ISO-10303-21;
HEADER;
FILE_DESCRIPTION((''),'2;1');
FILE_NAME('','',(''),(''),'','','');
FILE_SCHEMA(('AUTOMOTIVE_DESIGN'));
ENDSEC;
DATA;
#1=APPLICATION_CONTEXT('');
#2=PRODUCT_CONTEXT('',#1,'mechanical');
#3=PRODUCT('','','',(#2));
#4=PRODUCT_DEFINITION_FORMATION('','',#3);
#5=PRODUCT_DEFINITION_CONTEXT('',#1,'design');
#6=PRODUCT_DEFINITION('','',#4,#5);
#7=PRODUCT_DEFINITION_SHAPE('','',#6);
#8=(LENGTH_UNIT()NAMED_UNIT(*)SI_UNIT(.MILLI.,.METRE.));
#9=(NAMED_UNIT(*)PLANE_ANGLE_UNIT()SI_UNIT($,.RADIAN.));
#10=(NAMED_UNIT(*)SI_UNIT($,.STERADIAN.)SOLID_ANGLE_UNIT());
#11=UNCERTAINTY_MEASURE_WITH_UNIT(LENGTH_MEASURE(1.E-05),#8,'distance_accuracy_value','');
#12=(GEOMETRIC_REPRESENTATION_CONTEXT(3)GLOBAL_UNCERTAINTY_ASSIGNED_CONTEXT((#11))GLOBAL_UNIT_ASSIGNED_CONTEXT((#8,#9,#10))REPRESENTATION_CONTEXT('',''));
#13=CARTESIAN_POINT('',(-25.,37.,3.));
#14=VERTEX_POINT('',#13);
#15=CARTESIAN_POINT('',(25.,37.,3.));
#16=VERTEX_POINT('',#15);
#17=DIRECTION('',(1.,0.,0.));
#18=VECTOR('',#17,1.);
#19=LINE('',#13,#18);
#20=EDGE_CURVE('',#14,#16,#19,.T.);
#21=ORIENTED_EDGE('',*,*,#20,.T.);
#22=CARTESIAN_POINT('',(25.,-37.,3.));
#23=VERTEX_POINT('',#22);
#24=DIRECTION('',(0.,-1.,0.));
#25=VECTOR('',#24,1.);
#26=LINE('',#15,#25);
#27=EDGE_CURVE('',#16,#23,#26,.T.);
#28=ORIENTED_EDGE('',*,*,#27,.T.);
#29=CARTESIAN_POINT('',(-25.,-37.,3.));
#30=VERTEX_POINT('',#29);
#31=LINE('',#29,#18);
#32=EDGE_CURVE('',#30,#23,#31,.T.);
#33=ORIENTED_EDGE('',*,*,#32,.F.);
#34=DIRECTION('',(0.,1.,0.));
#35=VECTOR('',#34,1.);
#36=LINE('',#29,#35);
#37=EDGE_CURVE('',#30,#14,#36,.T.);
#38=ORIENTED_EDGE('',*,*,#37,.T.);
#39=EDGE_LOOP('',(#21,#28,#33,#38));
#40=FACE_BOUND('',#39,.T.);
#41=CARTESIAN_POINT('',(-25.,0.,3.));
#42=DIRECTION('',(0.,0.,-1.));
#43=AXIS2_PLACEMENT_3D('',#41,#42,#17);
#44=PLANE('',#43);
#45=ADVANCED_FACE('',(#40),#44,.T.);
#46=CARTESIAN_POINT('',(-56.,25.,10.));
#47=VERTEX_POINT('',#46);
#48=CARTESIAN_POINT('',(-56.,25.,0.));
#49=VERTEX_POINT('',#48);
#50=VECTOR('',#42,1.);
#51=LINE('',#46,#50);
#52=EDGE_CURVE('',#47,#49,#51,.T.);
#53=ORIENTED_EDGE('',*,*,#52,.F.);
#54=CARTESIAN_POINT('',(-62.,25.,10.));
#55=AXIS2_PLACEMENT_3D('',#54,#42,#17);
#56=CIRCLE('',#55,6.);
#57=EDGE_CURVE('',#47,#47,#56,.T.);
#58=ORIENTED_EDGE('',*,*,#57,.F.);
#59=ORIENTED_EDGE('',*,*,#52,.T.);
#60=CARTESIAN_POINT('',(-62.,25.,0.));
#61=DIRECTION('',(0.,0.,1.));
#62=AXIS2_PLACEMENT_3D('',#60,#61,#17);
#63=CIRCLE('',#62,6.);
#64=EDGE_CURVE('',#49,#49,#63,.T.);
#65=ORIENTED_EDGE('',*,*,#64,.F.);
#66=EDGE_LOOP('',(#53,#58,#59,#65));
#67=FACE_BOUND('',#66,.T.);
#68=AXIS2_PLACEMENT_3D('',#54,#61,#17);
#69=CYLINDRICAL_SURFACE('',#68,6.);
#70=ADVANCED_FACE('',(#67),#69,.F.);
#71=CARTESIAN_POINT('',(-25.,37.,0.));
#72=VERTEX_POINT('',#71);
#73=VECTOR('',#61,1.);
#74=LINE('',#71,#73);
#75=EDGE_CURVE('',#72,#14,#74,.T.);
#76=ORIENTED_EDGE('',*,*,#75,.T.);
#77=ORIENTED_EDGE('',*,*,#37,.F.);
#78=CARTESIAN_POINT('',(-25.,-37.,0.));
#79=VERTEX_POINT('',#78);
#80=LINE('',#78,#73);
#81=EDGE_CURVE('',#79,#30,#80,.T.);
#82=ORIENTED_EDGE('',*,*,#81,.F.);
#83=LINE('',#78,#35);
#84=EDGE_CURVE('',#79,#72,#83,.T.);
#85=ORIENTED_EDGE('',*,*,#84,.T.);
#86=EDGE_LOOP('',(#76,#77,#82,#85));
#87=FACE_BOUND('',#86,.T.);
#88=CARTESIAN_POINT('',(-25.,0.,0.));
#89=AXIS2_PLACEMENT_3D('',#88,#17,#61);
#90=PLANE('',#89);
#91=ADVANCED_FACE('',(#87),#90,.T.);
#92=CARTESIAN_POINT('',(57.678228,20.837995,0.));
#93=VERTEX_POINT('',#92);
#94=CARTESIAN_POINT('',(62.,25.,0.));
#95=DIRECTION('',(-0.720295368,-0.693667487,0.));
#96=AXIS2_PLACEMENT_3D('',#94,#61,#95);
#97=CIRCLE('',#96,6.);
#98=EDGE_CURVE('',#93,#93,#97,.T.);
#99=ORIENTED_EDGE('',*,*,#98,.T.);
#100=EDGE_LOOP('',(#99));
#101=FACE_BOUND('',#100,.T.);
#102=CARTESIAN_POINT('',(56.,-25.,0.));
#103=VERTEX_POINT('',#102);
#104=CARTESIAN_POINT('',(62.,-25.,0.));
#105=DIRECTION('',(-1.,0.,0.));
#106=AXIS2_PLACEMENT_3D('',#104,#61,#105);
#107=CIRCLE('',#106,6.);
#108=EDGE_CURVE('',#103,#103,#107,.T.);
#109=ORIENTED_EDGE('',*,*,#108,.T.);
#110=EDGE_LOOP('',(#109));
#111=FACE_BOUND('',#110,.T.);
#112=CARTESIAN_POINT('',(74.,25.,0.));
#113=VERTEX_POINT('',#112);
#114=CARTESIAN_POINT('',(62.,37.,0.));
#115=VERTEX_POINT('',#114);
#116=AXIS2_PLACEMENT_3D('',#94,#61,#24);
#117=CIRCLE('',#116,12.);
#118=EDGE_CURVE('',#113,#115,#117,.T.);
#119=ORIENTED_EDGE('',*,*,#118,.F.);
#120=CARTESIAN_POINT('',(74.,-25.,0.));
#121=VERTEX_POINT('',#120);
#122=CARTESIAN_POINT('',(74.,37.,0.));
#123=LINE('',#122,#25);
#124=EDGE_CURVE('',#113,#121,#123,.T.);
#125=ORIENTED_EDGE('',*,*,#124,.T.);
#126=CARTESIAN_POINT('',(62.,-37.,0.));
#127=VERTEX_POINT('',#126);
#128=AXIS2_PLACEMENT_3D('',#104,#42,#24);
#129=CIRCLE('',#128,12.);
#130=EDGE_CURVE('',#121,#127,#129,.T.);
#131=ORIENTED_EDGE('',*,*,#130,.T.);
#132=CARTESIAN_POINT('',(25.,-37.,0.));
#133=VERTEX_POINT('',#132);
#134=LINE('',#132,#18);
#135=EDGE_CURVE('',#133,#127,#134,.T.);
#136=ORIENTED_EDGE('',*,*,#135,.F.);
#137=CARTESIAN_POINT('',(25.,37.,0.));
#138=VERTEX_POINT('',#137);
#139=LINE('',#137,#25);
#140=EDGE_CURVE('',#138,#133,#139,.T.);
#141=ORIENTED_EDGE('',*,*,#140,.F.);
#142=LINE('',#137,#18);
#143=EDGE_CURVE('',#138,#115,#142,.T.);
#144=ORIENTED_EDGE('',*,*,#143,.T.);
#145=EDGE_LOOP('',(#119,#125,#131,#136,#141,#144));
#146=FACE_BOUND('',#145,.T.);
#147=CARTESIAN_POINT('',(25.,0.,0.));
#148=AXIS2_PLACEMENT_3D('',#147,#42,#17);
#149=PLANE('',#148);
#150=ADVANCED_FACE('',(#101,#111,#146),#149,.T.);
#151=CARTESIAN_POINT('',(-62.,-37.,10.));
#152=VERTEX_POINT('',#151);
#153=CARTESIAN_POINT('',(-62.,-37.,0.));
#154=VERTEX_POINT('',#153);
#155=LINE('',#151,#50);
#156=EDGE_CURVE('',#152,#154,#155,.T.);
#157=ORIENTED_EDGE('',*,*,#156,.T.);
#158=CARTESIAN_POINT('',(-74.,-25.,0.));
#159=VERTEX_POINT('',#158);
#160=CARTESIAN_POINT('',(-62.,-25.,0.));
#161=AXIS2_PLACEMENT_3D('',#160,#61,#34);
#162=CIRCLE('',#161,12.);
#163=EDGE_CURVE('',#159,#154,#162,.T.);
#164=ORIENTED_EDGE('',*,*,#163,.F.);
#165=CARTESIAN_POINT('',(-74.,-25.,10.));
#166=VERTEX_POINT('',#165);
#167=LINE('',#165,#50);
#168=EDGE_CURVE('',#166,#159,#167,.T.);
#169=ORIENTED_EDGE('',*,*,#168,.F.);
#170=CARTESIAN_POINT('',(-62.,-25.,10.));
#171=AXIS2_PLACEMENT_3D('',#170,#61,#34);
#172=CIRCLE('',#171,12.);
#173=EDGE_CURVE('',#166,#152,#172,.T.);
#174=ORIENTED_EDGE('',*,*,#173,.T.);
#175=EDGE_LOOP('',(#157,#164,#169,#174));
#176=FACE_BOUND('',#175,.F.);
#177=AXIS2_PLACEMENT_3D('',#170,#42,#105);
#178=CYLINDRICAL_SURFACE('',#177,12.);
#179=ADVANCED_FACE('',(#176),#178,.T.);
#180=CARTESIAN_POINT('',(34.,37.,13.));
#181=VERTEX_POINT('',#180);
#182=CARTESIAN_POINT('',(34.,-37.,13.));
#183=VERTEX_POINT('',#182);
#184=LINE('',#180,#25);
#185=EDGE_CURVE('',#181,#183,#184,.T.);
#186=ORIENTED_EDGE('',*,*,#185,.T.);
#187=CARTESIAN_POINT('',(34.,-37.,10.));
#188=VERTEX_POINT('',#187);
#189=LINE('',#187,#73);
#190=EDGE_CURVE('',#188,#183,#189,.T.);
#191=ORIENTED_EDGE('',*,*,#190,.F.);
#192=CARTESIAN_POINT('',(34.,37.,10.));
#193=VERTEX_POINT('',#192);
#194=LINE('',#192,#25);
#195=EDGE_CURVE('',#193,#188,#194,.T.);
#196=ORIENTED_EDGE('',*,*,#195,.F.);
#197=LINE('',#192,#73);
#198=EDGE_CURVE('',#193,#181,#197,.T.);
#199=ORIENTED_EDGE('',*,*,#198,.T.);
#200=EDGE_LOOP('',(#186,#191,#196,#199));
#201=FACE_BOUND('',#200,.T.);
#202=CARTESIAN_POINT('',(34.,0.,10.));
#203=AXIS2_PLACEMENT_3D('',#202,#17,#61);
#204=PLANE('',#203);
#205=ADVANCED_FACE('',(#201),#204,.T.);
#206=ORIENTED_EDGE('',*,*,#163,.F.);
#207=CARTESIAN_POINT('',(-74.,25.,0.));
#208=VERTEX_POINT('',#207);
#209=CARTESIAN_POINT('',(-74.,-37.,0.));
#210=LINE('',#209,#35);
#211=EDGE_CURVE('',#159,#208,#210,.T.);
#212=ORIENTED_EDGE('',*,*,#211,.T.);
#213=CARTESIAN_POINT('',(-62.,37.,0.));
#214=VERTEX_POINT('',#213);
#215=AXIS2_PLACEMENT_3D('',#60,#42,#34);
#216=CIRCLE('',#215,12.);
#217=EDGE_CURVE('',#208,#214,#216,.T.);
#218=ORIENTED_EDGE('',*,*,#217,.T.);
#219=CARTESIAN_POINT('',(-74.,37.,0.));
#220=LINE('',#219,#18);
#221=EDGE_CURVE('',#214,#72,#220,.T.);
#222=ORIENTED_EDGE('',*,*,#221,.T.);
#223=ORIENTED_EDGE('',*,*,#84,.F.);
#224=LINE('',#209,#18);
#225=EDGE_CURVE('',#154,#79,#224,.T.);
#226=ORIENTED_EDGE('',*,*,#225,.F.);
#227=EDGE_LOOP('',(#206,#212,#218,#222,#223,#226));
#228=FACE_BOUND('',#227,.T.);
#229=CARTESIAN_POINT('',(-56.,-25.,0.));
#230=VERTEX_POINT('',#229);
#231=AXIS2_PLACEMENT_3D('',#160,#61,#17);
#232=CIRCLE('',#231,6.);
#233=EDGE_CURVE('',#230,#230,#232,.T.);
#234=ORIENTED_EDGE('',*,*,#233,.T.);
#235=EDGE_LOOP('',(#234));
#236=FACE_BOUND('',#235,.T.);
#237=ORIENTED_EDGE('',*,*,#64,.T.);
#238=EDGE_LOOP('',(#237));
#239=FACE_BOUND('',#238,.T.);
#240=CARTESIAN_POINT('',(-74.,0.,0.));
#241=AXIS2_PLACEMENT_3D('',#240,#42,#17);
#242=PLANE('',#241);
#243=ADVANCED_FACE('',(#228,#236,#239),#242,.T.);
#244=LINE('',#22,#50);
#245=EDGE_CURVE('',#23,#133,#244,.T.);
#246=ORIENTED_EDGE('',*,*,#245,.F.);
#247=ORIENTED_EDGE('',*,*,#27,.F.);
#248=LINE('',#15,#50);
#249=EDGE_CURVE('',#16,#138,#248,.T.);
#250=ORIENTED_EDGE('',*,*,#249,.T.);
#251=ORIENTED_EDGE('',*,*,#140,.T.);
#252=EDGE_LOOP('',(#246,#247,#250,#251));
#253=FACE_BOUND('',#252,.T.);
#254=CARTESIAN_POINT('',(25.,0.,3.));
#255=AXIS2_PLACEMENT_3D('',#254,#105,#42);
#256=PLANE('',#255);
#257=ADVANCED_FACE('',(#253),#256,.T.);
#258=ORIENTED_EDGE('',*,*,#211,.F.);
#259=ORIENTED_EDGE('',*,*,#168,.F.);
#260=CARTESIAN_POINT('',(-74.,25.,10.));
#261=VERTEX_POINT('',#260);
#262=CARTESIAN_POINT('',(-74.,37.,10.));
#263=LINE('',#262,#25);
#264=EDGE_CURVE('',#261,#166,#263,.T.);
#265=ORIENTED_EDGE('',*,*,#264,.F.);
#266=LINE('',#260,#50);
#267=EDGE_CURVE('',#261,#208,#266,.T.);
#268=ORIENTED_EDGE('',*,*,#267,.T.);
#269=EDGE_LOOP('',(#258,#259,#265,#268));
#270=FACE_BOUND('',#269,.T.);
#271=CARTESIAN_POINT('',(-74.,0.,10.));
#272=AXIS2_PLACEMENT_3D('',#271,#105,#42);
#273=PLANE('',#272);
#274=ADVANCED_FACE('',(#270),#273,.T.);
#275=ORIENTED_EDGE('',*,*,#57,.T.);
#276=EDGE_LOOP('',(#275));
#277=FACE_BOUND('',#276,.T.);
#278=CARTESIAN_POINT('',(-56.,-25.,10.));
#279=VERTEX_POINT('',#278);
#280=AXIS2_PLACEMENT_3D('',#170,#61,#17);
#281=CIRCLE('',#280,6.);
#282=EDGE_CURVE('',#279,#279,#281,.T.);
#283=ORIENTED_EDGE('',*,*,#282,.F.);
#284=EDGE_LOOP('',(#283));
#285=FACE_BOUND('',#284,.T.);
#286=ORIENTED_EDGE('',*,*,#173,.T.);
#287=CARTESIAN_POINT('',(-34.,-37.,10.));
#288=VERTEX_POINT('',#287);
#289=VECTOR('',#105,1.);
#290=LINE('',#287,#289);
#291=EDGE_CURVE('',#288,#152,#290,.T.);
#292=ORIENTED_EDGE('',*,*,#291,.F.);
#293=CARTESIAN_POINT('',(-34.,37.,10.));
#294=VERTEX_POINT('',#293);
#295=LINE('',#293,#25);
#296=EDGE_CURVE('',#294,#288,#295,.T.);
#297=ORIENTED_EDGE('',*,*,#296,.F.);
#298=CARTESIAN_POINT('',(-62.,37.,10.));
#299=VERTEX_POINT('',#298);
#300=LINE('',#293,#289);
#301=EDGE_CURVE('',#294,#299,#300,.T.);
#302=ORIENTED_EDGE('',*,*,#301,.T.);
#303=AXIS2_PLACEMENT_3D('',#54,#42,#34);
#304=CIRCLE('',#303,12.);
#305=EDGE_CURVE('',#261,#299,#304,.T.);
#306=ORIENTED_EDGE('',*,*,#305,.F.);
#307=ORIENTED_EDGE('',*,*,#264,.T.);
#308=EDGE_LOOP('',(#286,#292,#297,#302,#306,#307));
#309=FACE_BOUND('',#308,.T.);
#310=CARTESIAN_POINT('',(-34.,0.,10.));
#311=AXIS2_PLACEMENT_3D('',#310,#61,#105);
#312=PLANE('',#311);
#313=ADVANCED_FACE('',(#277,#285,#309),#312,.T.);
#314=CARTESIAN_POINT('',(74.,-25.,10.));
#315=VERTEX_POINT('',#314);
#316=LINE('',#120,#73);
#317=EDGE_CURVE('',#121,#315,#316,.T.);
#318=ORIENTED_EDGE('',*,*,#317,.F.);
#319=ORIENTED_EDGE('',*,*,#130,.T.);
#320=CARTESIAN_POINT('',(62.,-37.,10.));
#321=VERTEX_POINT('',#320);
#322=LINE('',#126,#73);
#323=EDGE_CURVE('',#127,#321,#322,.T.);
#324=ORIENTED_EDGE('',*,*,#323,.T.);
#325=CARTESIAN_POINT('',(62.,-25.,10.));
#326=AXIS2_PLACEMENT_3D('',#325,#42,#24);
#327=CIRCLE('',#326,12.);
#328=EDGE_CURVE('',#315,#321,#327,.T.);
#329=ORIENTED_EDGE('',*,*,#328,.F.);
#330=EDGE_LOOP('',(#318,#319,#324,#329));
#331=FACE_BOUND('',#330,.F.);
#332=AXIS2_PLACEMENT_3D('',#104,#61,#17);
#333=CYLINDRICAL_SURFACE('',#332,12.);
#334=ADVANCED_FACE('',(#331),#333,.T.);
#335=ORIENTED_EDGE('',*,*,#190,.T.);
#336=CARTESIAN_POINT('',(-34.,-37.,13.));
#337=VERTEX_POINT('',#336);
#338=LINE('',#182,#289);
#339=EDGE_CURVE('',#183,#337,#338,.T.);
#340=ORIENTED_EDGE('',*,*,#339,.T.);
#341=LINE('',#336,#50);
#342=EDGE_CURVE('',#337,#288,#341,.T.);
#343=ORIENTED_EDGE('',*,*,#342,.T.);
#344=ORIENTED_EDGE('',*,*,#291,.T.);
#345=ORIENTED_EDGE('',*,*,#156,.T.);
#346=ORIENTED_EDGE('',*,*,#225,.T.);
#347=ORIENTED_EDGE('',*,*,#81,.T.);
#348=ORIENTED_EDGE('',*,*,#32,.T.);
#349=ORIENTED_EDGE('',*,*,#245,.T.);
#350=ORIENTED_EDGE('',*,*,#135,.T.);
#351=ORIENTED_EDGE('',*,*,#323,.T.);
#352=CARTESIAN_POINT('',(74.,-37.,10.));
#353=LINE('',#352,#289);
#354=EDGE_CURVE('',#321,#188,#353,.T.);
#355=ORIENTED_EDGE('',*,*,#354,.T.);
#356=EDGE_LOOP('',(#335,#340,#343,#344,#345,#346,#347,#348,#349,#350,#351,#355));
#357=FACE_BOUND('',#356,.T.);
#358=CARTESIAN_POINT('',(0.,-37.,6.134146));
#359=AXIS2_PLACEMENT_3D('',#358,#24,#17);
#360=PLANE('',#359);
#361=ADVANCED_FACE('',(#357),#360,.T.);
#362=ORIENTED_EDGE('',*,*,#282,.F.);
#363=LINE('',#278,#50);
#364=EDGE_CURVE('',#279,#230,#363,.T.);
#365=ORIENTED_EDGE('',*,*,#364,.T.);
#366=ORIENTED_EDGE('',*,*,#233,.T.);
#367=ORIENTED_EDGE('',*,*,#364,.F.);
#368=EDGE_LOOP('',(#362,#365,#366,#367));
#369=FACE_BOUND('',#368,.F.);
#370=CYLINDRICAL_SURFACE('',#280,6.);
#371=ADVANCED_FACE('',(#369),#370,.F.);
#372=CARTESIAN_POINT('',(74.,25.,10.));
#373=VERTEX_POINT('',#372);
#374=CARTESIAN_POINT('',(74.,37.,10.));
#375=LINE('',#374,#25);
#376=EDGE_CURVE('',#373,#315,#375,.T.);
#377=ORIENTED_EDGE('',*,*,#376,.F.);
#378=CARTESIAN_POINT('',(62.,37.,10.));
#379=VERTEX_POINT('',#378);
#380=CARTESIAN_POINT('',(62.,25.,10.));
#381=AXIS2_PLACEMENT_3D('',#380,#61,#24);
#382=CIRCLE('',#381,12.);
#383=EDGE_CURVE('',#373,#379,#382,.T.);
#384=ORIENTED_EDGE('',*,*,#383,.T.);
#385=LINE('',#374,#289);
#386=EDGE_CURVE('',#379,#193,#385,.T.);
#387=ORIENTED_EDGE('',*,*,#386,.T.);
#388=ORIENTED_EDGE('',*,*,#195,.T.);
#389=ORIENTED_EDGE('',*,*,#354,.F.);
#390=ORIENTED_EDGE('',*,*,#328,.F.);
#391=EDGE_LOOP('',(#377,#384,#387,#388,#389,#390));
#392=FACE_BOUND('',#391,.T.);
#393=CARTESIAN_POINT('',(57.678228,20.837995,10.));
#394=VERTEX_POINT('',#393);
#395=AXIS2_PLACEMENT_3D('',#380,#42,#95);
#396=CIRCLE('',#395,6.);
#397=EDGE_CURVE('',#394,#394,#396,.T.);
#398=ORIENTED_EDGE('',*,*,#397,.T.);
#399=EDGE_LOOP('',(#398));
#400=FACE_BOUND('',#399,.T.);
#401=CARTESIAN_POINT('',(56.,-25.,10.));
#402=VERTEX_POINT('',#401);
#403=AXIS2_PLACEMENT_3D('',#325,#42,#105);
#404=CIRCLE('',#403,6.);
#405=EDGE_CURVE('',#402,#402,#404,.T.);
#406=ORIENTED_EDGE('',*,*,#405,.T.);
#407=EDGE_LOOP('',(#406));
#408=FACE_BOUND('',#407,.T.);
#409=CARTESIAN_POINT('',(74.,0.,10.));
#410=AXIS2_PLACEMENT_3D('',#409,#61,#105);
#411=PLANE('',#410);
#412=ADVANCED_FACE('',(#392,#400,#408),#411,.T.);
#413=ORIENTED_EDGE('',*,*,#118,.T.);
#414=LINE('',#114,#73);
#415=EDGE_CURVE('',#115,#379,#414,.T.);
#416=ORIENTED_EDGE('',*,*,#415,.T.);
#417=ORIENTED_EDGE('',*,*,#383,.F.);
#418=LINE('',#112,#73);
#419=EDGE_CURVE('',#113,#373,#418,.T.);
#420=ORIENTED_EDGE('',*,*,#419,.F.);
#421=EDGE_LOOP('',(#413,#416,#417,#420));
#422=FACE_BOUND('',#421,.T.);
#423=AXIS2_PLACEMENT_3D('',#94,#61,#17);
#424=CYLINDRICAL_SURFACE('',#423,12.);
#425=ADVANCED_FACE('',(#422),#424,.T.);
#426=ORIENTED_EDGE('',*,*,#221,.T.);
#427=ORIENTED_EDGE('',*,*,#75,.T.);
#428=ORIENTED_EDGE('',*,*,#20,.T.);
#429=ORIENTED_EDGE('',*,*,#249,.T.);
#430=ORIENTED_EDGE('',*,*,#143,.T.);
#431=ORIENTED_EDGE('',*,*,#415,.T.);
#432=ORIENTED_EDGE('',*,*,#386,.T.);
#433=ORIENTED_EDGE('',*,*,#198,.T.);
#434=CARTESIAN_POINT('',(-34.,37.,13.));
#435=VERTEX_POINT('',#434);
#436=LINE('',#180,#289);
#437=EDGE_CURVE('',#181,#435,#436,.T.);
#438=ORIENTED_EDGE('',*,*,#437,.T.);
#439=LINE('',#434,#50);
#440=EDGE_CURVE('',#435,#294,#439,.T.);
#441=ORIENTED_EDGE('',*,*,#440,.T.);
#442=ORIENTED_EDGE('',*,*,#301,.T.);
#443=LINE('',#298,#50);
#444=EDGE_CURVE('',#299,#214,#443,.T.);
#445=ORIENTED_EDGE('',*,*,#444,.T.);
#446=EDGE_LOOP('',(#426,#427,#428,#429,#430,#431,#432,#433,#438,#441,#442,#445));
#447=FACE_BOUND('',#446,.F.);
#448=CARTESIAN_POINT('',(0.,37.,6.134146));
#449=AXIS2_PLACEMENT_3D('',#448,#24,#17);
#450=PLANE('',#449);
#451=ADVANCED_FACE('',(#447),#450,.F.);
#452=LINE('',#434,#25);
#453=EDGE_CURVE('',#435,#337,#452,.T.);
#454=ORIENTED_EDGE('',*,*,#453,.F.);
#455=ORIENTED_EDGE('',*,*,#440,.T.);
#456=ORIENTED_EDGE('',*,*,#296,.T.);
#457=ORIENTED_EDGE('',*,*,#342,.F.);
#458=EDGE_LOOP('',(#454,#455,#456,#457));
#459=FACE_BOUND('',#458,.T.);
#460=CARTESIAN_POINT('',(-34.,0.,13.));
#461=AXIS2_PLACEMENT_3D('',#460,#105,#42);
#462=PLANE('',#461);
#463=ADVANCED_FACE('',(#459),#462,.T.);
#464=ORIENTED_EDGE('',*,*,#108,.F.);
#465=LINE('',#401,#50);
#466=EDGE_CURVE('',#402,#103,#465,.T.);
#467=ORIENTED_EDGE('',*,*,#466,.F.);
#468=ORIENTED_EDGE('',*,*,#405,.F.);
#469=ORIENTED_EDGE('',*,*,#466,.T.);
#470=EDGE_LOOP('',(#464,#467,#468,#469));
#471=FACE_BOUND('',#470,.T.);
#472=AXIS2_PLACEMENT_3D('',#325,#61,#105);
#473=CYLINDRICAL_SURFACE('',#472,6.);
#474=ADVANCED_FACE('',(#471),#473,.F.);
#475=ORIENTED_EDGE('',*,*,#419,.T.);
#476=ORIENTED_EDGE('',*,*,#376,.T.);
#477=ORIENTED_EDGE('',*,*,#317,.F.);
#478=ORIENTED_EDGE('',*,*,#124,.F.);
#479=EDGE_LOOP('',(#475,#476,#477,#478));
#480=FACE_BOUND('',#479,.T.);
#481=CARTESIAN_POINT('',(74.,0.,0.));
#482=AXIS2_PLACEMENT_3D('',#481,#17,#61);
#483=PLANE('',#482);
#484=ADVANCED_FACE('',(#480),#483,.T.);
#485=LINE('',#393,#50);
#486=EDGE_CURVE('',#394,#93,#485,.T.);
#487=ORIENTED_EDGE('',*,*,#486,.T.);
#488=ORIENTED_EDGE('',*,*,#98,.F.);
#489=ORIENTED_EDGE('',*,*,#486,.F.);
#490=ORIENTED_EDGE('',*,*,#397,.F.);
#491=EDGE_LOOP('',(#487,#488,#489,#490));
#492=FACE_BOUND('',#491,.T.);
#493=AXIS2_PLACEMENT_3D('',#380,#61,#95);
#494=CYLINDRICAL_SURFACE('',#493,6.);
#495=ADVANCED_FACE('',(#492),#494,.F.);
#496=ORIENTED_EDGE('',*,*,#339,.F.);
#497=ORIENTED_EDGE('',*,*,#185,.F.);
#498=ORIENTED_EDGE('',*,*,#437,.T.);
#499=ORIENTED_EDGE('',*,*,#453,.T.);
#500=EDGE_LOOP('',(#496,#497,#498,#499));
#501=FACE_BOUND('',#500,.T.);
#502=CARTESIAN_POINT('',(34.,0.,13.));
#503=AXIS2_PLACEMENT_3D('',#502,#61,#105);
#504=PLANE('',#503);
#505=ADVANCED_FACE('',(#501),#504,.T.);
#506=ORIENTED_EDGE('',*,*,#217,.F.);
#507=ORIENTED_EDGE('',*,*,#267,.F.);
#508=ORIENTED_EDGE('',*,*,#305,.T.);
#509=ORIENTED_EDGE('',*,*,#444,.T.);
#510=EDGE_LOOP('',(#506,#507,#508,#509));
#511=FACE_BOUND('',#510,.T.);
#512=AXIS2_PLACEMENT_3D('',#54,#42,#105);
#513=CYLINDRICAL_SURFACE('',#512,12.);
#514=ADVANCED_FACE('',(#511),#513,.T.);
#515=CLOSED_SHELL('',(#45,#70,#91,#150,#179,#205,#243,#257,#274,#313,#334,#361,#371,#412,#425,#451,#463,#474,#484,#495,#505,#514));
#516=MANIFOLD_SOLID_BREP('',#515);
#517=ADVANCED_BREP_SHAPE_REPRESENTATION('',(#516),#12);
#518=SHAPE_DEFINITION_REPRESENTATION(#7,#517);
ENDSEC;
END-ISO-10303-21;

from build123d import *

# Parameters (mm, degrees)
F1_DEPTH = 37
F2_R     = 12
F3_R     = 6
F4_DEPTH = 25


# Not quite as in the source:
# - a pattern or mirror of a feature is missing from the dataset's text; its kind, count and spacing are read off the source's solid


with BuildPart() as f1:
    # F0 (on Front) → F1 (new body, symmetric)
    with BuildSketch(Plane.XZ):
        Polygon((-25, 3), (0, 3), (25, 3), (25, 0), (74, 0), (74, 10), (34, 10), (34, 13), (0, 13), (-34, 13), (-34, 10), (-74, 10), (-74, 0), (-25, 0), align=None)
    extrude(amount=F1_DEPTH, both=True)

    # F2
    f2_edges = [f1.edges().sort_by_distance(p)[0] for p in [
        (74, -37, 5),
        (74, 37, 5),
        (-74, -37, 5),
        (-74, 37, 5),
    ]]
    fillet(f2_edges, radius=F2_R)

    # F3 (on face) → F4 (cut)
    with BuildSketch(Plane.XY.offset(10)):
        with Locations((-62, -25)):
            Circle(F3_R)
    f4 = extrude(amount=-F4_DEPTH, mode=Mode.SUBTRACT)

    # F4_copies: F4 across plane
    add(f4.mirror(Plane.ZX), mode=Mode.SUBTRACT)

    # F4_copies1: F4 across plane
    add(f4.mirror(Plane(origin=(0, 0, 0), x_dir=(-0.3739683355, 0.927441472, 0), z_dir=(0.927441472, 0.3739683355, 0))), mode=Mode.SUBTRACT)

    # F4_copies2: F4 across plane
    add(f4.mirror(Plane(origin=(0, 0, 0), x_dir=(0, 0, 1), z_dir=(1, 0, 0))), mode=Mode.SUBTRACT)


solid = f1.part
